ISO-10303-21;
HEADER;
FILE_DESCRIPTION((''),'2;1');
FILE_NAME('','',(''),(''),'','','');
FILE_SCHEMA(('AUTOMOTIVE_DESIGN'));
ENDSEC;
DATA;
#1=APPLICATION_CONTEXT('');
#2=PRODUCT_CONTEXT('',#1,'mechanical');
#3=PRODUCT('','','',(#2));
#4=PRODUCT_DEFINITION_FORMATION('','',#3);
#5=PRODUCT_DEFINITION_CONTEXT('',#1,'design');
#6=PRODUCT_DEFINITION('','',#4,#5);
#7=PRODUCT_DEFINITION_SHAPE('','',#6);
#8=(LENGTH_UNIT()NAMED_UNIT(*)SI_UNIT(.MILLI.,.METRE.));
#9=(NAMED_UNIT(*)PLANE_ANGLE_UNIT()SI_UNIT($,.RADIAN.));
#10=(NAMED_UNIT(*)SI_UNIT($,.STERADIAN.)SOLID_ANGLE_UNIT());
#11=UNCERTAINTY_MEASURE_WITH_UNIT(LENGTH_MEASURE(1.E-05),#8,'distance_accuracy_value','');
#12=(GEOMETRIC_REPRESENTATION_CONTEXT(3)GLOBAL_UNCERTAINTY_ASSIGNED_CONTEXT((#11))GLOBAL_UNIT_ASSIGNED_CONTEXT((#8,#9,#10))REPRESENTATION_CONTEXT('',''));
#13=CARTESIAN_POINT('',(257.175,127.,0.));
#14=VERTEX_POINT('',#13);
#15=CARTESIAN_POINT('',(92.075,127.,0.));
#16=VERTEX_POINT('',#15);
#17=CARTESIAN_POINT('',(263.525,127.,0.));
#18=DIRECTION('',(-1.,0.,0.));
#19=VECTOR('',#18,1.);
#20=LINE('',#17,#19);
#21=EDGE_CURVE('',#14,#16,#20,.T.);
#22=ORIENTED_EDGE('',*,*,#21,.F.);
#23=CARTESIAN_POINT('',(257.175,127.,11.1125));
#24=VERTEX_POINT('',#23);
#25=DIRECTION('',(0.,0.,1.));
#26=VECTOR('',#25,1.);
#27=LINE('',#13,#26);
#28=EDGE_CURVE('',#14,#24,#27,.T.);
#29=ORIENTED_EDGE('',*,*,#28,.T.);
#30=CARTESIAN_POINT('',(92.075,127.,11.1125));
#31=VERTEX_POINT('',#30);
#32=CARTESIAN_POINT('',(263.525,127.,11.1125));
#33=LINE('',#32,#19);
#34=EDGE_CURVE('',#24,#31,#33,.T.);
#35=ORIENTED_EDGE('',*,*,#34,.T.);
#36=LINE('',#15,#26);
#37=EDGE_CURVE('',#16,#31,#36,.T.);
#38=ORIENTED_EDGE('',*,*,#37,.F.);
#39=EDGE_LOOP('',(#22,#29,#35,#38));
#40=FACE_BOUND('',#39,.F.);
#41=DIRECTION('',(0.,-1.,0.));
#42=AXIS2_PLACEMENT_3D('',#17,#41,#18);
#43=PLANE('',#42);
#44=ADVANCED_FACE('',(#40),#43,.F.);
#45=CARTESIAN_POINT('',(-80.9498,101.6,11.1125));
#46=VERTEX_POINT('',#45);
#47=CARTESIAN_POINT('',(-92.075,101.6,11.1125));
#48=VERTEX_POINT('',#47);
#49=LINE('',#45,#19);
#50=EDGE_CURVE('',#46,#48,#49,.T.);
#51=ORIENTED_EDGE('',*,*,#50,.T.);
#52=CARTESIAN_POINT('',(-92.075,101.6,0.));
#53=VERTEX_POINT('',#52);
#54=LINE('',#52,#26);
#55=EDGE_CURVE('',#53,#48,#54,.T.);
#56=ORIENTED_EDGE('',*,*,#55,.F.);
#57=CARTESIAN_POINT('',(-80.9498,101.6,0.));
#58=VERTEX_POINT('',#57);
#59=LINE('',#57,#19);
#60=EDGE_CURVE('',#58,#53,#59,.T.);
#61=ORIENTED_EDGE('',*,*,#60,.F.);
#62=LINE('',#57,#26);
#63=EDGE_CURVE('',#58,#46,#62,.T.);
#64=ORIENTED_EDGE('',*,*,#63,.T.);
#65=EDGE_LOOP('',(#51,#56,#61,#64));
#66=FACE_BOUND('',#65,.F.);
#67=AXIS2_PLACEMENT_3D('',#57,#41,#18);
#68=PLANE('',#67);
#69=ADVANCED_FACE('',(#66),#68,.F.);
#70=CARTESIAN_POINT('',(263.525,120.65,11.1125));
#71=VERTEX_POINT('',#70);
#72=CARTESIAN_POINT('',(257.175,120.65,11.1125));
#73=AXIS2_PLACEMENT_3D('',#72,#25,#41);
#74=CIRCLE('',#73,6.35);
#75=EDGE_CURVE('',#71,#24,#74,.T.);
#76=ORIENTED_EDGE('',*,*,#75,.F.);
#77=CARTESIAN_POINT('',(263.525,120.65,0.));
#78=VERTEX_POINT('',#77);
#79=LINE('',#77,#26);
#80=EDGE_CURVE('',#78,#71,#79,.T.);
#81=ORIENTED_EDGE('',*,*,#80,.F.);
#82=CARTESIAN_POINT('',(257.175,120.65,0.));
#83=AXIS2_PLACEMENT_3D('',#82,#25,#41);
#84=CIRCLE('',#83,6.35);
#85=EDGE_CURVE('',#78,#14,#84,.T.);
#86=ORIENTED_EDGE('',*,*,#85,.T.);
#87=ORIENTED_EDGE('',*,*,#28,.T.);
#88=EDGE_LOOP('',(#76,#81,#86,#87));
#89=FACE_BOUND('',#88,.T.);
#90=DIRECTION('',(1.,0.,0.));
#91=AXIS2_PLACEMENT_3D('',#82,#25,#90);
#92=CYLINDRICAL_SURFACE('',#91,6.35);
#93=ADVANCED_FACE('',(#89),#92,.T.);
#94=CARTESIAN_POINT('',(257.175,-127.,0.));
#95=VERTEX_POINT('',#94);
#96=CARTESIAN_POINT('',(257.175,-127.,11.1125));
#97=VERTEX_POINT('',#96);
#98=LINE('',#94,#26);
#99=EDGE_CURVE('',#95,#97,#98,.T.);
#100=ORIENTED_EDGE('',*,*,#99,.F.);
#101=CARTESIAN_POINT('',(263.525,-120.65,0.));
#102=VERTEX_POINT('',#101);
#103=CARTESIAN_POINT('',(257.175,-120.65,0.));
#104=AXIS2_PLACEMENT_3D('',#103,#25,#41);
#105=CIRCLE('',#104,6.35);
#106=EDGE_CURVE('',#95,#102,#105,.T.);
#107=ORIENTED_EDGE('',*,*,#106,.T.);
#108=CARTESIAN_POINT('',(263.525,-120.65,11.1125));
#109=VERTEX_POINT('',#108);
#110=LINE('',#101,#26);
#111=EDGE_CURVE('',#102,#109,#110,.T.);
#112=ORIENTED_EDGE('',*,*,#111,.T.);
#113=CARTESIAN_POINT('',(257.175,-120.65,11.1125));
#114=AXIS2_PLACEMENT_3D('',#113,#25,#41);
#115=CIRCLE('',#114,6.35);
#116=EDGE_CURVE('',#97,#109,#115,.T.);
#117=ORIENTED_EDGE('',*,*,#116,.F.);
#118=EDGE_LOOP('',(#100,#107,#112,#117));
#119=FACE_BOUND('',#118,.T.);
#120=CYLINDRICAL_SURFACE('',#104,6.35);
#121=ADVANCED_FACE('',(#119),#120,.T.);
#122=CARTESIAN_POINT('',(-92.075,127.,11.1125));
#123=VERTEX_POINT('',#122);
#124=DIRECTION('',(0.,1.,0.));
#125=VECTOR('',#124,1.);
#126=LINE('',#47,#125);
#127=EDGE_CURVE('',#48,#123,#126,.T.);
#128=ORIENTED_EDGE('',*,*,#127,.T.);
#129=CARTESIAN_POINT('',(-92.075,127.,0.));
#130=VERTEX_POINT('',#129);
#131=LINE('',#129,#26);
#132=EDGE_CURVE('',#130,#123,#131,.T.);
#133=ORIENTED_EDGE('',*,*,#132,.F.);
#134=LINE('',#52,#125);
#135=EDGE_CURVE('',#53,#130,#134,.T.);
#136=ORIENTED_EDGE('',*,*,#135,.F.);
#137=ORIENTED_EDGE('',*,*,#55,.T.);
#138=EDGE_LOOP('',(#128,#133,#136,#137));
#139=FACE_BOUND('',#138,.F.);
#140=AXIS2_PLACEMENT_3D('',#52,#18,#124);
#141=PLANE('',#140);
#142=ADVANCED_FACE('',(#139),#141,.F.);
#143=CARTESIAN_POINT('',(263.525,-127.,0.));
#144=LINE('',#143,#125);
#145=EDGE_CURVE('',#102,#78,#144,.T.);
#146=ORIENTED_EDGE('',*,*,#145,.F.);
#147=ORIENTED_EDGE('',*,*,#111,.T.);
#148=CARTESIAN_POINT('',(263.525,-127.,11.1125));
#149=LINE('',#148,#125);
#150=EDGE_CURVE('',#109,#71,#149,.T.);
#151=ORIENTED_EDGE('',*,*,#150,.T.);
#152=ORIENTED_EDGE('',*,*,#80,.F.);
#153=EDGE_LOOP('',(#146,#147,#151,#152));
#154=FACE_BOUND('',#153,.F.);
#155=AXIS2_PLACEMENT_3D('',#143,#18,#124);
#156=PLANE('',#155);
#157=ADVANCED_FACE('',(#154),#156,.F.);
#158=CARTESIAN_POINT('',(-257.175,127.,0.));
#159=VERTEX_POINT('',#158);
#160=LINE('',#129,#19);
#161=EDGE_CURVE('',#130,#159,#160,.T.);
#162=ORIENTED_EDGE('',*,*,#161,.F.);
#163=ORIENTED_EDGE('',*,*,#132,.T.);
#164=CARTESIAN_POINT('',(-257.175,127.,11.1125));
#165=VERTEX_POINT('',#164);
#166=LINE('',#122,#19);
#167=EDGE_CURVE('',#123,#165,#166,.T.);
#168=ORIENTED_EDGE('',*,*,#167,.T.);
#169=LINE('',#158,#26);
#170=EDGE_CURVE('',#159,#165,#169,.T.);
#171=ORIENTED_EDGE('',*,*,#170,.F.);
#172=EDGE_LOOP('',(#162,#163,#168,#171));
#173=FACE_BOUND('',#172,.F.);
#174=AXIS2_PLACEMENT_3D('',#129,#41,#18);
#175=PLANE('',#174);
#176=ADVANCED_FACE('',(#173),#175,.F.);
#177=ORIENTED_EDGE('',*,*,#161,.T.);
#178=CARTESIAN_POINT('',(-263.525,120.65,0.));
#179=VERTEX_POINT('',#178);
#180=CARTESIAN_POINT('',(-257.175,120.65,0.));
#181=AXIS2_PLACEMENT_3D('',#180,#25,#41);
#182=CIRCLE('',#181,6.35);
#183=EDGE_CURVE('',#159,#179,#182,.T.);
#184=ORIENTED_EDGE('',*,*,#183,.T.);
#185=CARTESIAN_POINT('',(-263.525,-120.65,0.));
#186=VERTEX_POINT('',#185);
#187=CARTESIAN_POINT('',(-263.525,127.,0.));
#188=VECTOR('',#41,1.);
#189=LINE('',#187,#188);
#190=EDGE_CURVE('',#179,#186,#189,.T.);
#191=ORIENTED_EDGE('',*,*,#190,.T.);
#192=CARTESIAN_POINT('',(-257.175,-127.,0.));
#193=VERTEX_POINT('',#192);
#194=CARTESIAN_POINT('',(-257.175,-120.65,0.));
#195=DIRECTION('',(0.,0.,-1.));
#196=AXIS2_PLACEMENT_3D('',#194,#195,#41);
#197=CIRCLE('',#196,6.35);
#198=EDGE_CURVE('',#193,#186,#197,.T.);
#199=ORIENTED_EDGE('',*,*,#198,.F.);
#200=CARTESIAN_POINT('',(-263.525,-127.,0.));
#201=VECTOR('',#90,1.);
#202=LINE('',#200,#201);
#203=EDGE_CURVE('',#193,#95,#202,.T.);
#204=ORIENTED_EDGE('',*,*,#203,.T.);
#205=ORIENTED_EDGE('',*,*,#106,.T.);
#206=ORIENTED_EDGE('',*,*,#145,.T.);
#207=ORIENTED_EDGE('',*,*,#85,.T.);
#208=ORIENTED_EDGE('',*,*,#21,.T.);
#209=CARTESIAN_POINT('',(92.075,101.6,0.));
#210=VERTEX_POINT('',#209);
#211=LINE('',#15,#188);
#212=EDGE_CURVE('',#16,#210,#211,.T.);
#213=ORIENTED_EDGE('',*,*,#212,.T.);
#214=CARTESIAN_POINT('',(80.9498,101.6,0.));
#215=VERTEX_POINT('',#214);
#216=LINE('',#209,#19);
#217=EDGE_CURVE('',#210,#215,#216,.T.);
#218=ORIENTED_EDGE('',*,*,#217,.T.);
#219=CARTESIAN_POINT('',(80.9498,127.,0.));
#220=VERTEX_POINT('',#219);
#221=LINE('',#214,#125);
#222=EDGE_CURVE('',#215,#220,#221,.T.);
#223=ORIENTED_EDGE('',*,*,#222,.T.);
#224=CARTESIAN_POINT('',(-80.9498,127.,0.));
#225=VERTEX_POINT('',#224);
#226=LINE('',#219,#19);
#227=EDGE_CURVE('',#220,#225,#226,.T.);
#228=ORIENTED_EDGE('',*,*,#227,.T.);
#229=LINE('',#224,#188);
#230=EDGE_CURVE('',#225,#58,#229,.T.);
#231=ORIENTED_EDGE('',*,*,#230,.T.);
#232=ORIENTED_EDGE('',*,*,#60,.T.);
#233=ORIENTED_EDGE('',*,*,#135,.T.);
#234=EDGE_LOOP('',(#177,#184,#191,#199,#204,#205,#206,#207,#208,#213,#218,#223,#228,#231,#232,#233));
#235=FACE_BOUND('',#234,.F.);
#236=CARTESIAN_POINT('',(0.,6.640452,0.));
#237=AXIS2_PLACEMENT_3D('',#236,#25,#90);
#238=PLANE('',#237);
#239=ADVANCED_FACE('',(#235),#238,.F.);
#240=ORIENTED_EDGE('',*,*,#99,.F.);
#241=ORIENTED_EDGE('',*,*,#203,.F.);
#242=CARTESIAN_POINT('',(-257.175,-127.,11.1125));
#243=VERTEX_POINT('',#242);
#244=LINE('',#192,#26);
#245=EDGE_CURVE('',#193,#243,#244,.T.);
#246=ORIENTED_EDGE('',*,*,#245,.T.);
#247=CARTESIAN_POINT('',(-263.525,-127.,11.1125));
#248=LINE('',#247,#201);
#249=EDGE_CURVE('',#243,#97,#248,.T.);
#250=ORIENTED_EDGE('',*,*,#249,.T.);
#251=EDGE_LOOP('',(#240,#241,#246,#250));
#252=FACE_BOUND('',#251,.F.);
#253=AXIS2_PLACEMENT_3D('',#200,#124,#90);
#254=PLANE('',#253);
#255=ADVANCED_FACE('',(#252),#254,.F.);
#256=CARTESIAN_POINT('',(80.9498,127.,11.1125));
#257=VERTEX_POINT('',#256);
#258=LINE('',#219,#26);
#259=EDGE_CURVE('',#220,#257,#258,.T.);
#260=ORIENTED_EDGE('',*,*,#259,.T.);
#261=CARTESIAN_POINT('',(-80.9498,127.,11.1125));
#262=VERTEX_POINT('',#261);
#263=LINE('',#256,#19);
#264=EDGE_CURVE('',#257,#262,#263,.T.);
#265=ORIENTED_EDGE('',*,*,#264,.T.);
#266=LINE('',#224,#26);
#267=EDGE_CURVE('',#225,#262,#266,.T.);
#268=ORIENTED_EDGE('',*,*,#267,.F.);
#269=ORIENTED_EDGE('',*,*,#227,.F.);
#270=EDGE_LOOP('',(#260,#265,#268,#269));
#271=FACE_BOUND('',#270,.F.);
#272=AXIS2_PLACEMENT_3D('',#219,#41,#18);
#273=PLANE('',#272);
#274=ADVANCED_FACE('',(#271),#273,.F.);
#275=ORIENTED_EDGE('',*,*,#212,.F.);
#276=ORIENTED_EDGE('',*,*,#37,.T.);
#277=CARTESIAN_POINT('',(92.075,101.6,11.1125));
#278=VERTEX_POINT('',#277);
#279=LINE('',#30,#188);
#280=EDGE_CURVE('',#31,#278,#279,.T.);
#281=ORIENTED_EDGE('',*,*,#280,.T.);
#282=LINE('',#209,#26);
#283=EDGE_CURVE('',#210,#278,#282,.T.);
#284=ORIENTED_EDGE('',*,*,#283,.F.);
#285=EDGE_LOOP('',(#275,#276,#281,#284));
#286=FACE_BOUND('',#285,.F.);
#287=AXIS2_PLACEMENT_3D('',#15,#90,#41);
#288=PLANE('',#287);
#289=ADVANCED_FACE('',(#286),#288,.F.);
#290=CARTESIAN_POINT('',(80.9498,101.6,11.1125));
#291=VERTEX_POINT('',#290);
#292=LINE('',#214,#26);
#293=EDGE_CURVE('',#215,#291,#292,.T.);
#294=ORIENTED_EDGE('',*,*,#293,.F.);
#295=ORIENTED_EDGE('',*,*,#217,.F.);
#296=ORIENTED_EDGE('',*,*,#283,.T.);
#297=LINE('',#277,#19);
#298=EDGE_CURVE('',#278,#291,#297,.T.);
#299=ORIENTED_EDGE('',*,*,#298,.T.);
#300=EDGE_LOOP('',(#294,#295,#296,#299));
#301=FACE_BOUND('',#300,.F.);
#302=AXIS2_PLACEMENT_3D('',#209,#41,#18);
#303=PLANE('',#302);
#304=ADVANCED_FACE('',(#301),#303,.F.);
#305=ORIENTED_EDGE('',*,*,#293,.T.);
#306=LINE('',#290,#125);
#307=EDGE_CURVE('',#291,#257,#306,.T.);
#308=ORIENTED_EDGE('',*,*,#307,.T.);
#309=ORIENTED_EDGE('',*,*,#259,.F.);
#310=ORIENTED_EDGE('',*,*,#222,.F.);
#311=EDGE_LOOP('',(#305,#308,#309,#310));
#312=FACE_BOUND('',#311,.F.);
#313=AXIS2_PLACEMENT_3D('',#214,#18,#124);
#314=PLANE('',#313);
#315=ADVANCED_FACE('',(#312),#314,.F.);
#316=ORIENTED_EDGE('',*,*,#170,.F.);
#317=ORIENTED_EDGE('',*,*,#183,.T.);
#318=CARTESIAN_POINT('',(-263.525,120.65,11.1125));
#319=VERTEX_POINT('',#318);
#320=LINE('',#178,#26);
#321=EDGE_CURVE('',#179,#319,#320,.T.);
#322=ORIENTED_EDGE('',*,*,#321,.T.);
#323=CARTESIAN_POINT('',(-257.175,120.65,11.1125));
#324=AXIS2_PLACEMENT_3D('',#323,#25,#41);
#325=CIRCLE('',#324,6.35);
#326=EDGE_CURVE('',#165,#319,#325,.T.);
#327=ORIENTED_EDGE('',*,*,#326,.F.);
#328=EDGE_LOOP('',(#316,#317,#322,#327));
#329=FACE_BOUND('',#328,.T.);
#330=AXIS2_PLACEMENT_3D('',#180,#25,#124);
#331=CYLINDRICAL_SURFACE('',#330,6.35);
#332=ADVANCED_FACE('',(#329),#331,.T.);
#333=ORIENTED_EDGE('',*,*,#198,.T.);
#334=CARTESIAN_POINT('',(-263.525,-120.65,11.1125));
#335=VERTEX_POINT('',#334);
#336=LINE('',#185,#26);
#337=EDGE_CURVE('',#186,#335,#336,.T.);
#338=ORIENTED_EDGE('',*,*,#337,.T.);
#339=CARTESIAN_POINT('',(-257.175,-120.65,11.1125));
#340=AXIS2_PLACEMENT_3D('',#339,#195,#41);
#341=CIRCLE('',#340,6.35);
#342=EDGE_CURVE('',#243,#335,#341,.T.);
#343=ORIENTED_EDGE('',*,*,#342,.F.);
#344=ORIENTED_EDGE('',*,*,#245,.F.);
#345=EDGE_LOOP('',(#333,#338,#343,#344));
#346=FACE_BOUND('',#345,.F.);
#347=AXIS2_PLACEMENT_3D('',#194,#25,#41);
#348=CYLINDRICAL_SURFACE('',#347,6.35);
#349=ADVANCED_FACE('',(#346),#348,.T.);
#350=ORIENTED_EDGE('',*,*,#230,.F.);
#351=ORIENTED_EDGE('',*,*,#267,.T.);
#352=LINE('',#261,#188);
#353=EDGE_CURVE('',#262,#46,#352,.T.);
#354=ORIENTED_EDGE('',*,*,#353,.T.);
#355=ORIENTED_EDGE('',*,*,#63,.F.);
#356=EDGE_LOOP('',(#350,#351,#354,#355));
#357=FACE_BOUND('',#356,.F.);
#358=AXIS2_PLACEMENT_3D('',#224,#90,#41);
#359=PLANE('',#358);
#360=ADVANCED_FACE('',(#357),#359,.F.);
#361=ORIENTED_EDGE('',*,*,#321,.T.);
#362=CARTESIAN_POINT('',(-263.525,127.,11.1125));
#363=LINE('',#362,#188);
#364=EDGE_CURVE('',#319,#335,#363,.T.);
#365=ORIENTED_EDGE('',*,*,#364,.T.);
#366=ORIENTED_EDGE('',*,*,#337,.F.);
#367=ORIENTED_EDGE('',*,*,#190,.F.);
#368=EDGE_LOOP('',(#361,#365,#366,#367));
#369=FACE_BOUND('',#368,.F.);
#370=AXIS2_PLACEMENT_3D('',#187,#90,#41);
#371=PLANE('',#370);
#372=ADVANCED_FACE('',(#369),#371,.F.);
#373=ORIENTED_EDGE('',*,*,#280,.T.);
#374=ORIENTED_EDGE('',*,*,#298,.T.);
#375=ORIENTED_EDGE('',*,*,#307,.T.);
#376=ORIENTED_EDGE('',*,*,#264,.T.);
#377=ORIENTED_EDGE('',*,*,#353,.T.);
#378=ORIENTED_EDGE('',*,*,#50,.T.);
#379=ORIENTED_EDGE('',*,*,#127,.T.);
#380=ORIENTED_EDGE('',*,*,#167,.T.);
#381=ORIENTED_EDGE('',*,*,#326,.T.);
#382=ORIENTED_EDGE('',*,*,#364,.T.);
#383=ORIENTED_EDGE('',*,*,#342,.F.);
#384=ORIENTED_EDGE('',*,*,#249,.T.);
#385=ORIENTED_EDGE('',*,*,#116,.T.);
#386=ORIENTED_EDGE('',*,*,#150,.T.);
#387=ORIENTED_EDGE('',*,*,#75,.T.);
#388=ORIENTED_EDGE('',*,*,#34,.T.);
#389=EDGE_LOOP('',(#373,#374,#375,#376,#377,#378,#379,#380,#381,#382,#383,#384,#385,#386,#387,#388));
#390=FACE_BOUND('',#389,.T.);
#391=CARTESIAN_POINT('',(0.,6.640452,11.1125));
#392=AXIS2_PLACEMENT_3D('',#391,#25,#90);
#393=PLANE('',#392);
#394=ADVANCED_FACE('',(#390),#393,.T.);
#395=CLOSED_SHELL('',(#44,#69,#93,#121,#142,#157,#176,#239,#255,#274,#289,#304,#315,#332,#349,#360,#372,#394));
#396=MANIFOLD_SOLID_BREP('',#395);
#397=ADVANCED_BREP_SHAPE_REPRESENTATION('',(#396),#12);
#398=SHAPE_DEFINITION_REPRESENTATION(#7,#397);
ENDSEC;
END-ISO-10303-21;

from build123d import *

# Parameters (mm, degrees)
F1_DEPTH = 11.1125
F2_R     = 6.35


# Not quite as in the source:
# - a feature names something its author has since deleted; it is built from what else it names


with BuildPart() as f1:
    # F0 (on Top) → F1 (new body)
    with BuildSketch(Plane.XY):
        Polygon((-263.525, -101.6), (-263.525, -127), (80.9498, -127), (92.075, -127), (263.525, -127), (263.525, -101.6), (263.525, 127), (92.075, 127), (92.075, 101.6), (80.9498, 101.6), (80.9498, 127), (-80.9498, 127), (-80.9498, 101.6), (-92.075, 101.6), (-92.075, 127), (-263.525, 127), align=None)
    extrude(amount=F1_DEPTH)

    # F2
    f2_edges = [f1.edges().sort_by_distance(p)[0] for p in [
        (263.525, -127, 5.55625),
        (263.525, 127, 5.55625),
        (-263.525, -127, 5.55625),
        (-263.525, 127, 5.55625),
    ]]
    fillet(f2_edges, radius=F2_R)


solid = f1.part
